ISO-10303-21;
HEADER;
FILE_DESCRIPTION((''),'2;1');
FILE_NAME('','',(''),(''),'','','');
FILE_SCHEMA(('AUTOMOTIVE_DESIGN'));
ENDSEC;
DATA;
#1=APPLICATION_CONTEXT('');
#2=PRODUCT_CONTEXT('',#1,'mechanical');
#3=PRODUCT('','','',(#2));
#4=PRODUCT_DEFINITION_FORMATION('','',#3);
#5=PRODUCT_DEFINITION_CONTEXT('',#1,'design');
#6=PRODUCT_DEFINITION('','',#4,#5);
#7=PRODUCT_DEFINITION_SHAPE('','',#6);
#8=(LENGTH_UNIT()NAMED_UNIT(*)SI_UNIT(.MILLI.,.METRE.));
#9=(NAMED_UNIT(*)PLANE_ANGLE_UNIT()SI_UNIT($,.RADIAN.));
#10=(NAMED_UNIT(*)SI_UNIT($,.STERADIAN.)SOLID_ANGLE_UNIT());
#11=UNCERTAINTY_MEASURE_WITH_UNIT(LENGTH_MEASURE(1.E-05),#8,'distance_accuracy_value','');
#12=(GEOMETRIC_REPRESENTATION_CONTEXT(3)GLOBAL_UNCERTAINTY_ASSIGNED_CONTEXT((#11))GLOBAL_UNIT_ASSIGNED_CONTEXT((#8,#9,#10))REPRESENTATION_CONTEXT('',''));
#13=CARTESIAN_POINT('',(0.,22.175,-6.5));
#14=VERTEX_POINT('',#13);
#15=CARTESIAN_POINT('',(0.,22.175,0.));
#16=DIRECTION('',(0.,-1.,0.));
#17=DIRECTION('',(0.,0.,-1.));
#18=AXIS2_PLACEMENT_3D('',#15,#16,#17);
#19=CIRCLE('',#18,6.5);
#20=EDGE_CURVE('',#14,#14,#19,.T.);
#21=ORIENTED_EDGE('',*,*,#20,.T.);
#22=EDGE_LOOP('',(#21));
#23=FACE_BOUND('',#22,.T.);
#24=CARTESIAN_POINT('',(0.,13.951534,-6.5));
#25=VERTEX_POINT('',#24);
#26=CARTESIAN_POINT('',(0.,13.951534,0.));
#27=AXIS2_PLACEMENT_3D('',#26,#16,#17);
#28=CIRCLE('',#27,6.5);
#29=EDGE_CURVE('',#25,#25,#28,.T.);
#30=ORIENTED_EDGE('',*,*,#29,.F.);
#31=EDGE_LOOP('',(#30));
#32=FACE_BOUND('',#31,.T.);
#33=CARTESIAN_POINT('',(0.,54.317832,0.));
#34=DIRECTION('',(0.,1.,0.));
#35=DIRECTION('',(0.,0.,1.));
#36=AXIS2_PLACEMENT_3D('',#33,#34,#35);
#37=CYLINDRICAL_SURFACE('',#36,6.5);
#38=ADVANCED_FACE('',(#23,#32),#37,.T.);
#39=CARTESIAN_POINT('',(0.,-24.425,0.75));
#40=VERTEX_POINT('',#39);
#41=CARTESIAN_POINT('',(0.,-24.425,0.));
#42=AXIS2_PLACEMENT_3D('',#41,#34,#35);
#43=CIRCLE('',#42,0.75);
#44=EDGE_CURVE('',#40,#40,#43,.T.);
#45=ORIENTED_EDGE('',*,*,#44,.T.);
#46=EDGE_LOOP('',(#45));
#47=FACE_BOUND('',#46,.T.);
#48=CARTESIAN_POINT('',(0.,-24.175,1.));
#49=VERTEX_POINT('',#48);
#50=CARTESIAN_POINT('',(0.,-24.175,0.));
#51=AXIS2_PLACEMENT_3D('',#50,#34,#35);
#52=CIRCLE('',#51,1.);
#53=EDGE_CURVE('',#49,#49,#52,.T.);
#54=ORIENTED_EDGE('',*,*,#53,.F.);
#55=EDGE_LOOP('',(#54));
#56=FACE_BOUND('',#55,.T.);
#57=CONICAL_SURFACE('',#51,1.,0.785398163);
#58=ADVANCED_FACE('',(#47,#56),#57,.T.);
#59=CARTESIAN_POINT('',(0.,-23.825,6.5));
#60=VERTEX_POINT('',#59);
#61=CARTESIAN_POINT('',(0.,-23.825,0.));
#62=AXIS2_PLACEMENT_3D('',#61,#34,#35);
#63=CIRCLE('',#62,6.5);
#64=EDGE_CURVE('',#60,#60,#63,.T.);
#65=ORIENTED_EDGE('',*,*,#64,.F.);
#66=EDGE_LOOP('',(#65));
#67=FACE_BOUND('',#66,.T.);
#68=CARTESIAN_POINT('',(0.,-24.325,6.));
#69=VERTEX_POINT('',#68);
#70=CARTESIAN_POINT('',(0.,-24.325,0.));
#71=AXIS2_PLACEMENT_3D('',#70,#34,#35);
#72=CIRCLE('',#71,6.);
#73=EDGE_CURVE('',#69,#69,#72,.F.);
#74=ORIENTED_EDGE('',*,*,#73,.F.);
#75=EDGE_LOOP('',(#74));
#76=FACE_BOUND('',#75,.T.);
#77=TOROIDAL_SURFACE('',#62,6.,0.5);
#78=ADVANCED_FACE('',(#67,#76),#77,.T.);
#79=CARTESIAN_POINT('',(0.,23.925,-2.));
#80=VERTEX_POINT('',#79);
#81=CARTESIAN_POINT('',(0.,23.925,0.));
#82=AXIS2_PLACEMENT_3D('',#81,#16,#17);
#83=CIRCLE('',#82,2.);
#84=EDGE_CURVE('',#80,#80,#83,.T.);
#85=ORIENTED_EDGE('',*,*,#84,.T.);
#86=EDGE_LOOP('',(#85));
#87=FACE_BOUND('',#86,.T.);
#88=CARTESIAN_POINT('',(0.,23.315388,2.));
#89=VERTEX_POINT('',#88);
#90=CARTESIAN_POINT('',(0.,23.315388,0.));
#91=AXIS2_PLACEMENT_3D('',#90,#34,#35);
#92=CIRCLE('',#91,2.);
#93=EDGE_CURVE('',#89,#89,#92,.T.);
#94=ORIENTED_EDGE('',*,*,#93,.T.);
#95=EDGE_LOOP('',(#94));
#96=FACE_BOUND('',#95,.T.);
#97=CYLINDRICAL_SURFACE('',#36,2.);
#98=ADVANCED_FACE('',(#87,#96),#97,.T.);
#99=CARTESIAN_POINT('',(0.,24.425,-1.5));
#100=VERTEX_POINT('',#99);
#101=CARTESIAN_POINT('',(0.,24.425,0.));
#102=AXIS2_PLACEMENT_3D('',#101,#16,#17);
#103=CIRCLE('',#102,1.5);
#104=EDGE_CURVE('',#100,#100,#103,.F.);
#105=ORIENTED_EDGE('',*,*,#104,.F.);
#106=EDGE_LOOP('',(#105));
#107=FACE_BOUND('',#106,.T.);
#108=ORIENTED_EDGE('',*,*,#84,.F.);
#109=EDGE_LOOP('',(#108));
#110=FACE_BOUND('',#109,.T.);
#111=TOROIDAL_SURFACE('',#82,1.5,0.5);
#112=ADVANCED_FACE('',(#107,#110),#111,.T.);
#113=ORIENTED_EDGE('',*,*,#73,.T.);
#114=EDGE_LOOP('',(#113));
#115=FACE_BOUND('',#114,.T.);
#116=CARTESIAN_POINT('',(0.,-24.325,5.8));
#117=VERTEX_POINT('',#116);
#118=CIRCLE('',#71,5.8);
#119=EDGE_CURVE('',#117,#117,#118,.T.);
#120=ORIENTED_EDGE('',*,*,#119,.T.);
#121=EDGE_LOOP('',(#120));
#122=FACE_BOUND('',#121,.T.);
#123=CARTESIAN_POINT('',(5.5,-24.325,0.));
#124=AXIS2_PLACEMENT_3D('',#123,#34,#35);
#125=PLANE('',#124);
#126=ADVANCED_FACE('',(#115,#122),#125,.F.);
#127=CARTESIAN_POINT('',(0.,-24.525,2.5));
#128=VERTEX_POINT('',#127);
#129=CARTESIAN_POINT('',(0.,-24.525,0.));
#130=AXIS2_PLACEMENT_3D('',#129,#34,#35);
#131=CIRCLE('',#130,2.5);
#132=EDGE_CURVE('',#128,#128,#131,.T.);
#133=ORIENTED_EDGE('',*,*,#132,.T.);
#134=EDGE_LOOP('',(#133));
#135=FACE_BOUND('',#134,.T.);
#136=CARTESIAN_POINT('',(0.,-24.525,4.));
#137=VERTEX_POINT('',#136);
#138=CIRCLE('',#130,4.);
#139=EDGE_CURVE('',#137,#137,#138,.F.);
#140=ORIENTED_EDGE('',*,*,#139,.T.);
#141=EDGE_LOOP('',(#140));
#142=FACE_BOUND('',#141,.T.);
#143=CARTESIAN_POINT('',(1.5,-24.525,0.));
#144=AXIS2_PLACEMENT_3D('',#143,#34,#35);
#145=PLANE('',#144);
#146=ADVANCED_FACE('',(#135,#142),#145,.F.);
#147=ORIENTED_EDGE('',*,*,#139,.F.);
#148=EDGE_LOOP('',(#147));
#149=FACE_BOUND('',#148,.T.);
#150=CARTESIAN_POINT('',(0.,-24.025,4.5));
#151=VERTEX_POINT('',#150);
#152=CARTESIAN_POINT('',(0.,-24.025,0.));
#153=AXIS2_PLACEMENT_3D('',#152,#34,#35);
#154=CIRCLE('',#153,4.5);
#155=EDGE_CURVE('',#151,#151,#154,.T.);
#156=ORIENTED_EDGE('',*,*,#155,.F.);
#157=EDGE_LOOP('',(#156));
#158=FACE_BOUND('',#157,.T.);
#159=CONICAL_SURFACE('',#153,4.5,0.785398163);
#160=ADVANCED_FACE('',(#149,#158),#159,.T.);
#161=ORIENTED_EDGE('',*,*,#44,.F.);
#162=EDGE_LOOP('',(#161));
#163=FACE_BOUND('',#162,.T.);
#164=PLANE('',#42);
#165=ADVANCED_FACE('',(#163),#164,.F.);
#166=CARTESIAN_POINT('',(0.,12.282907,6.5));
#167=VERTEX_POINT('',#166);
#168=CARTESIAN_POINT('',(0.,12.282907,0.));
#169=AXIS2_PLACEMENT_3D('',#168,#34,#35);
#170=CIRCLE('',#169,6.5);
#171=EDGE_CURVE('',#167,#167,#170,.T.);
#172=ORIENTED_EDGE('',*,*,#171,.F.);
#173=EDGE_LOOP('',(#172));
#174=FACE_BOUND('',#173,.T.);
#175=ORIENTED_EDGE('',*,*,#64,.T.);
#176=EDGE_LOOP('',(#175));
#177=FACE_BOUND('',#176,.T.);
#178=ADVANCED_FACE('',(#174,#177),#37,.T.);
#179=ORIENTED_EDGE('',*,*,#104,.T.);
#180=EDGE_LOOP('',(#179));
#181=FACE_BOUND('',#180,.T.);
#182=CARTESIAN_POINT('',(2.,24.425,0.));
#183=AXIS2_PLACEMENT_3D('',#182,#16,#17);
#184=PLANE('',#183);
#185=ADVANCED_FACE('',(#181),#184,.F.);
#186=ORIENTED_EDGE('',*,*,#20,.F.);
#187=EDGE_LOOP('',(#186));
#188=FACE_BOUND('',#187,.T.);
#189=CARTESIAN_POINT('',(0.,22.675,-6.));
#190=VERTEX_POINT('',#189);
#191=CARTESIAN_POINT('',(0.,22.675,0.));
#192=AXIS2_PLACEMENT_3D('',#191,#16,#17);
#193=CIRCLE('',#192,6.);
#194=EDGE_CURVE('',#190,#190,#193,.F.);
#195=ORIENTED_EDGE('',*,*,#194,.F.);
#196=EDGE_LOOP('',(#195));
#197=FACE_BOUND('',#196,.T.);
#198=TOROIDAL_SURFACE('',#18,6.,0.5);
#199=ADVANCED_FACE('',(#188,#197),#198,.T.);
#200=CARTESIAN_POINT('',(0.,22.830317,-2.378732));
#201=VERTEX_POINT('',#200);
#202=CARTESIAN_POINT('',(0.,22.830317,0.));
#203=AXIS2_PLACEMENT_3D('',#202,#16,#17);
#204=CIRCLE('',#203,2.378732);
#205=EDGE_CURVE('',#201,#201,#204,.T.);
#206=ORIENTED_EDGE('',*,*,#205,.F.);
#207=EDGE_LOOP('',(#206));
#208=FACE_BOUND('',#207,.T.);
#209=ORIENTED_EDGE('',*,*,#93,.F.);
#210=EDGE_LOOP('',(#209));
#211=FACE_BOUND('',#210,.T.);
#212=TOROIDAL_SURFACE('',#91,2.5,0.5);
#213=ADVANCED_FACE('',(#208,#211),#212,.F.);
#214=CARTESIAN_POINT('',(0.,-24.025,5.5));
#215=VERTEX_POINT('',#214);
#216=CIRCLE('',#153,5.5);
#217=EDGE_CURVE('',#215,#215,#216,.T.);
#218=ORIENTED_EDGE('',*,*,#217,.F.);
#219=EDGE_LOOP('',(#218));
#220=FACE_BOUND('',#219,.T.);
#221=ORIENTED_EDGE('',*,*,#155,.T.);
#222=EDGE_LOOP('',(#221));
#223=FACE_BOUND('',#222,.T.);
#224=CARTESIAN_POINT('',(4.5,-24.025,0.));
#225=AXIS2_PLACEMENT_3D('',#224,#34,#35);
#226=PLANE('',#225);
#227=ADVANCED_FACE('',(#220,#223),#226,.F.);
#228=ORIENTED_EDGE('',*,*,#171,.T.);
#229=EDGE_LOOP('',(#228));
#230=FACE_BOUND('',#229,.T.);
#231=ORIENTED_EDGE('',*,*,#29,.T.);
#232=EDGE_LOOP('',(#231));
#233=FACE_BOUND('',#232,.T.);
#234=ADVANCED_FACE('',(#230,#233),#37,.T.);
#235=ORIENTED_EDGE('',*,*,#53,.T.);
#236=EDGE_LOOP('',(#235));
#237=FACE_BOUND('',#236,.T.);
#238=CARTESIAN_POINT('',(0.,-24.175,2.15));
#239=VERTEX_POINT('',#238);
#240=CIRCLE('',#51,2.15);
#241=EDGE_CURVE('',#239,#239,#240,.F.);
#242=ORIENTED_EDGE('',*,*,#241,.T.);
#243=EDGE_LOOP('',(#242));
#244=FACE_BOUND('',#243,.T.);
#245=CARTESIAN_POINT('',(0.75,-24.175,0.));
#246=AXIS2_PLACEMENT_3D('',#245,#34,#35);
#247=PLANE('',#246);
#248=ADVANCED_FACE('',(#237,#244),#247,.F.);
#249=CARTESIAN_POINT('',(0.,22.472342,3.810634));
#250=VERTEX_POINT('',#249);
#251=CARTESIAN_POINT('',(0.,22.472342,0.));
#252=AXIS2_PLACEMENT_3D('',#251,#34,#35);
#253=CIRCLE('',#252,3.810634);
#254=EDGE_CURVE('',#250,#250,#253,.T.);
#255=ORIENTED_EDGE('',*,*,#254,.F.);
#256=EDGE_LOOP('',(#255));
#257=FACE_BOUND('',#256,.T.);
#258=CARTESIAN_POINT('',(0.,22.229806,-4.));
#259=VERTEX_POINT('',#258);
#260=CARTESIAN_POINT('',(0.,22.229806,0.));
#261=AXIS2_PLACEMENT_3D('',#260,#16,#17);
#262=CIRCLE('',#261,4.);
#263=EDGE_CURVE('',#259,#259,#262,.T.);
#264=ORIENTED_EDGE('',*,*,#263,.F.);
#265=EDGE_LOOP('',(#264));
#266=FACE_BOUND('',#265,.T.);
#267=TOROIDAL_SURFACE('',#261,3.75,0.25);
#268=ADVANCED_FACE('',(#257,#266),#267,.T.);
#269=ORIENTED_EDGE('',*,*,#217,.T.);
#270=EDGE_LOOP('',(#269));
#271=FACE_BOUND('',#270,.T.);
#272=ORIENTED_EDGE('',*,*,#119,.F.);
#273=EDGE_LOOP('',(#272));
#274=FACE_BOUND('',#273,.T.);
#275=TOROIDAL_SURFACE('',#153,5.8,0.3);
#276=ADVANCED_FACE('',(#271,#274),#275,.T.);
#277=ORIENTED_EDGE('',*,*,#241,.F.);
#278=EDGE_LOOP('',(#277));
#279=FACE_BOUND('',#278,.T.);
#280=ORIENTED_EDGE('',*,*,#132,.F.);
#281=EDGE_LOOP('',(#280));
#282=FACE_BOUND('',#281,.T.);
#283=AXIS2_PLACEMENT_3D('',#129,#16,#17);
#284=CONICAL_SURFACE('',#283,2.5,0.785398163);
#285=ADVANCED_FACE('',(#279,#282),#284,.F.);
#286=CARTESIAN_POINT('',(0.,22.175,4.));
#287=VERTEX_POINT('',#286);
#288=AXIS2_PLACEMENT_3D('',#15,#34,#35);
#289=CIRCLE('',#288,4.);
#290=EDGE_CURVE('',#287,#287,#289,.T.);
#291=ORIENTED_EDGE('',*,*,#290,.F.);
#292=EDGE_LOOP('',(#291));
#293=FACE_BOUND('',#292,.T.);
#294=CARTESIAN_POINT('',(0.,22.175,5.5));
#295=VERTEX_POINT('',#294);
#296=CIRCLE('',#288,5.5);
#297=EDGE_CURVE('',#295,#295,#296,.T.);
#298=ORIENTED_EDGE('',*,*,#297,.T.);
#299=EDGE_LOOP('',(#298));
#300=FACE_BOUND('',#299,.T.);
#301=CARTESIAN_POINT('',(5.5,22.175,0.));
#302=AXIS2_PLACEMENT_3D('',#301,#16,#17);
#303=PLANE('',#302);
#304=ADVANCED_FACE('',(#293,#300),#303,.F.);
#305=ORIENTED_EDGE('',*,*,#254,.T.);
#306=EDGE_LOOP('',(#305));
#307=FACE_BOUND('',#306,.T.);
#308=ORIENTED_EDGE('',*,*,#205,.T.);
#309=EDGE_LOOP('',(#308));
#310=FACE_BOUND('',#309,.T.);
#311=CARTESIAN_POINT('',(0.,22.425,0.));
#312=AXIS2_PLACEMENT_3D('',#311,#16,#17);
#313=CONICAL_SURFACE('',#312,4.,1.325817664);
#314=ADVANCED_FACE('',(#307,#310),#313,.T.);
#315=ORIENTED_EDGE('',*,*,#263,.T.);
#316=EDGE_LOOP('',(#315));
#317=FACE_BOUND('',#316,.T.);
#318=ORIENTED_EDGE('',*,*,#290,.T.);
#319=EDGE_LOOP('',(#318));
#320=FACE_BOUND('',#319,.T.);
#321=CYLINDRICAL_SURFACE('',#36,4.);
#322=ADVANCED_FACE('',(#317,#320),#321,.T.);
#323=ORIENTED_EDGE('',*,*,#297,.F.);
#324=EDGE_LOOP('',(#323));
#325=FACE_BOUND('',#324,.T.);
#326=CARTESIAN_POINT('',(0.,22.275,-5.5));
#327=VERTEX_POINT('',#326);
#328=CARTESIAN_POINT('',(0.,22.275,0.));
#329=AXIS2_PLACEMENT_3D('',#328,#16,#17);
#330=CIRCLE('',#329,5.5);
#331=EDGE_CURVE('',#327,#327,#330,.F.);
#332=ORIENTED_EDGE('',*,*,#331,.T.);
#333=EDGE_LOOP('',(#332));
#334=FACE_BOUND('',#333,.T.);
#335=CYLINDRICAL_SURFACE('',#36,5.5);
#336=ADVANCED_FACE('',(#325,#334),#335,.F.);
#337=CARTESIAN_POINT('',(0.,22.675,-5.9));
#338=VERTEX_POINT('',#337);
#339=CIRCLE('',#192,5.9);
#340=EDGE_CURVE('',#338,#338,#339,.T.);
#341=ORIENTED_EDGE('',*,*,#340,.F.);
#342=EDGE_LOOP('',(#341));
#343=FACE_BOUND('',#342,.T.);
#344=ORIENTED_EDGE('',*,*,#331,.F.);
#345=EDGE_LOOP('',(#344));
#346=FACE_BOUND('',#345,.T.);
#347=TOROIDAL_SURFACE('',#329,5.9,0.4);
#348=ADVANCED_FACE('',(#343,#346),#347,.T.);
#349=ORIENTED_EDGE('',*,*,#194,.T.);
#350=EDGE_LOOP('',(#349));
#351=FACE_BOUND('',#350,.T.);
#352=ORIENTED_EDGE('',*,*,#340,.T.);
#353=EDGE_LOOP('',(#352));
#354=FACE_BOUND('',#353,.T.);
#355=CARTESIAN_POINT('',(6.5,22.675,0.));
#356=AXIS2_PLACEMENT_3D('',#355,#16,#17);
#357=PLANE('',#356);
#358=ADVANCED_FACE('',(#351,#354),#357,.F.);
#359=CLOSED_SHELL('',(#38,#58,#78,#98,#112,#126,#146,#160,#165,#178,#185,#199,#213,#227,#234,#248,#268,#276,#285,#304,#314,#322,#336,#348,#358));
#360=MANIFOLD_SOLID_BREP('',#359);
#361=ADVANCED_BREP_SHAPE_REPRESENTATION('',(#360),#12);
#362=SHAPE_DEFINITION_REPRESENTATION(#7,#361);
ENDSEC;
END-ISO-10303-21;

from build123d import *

# Parameters (mm, degrees)
FILLET1_R     = 0.5
FILLET2_R     = 0.4
FILLET3_R     = 0.25
FILLET4_R     = 0.5
FILLET5_R     = 0.5
FILLET6_R     = 0.5
FILLET7_R     = 0.3
CHAMFER1_SIZE = 0.5
CHAMFER2_SIZE = 1
CHAMFER3_SIZE = 0.25


# Some blends are built 0.0001 mm under size
with BuildPart() as part:
    # Sketch1 → Revolve1 (revolve)
    with BuildSketch(Plane.XY, mode=Mode.PRIVATE) as revolve1_sk:
        Polygon((0, -24.425), (0.75, -24.425), (0.75, -24.175), (1.5, -24.175), (1.5, -24.525), (4.5, -24.525), (4.5, -24.025), (5.5, -24.025), (5.5, -24.325), (6.5, -24.325), (6.5, 22.675), (5.5, 22.675), (5.5, 22.175), (4, 22.175), (4, 22.425), (2, 22.925), (2, 24.425), (0, 24.425), align=None)
    revolve(revolve1_sk.sketch.rotate(Axis((0, 54.317832455, 0), (0, -1, 0)), 90), axis=Axis((0, 54.317832455, 0), (0, -1, 0)))

    # Fillet1
    fillet1_edges = [part.edges().sort_by_distance(p)[0] for p in [
        (0, 22.675, -6.5),
    ]]
    fillet(fillet1_edges, radius=FILLET1_R)

    # Fillet2
    fillet2_edges = [part.edges().sort_by_distance(p)[0] for p in [
        (0, 22.675, -5.5),
    ]]
    fillet(fillet2_edges, radius=FILLET2_R)

    # Fillet3
    fillet3_edges = [part.edges().sort_by_distance(p)[0] for p in [
        (0, 22.425, -4),
    ]]
    fillet(fillet3_edges, radius=FILLET3_R)

    # Fillet4
    fillet4_edges = [part.edges().sort_by_distance(p)[0] for p in [
        (0, 22.925, -2),
    ]]
    fillet(fillet4_edges, radius=FILLET4_R)

    # Fillet5
    fillet5_edges = [part.edges().sort_by_distance(p)[0] for p in [
        (0, 24.425, -2),
    ]]
    fillet(fillet5_edges, radius=FILLET5_R)

    # Fillet6
    fillet6_edges = [part.edges().sort_by_distance(p)[0] for p in [
        (0, -24.325, -6.5),
    ]]
    fillet(fillet6_edges, radius=FILLET6_R)

    # Fillet7
    fillet7_edges = [part.edges().sort_by_distance(p)[0] for p in [
        (0, -24.325, -5.5),
    ]]
    fillet(fillet7_edges, radius=FILLET7_R - 0.0001)  # a hair under: the kernel refuses the full size

    # Chamfer1
    chamfer1_edges = [part.edges().sort_by_distance(p)[0] for p in [
        (0, -24.525, -4.5),
    ]]
    chamfer(chamfer1_edges, length=CHAMFER1_SIZE - 0.0001)  # a hair under: the kernel refuses the full size

    # Chamfer2
    # the kernel refuses this chamfer: 1 mm, written as the material it takes off along each edge
    with BuildSketch(Plane(origin=(0, -24.525, 0), x_dir=(0, 0, 1), z_dir=(1, 0, 0))) as chamfer2_piece_1_section:
        Polygon((1.5 + CHAMFER2_SIZE, 0), (1.5, -CHAMFER2_SIZE), (1.5, 0), align=None)
    chamfer2_piece_1 = revolve(axis=Axis((0, -24.525, 0), (0, -1, 0)), mode=Mode.PRIVATE)
    chamfer2_piece_1 = split(chamfer2_piece_1, bisect_by=Plane(origin=(0, -24.175, -2.328039708), z_dir=(0, -1, 0)), keep=Keep.TOP, mode=Mode.PRIVATE)
    add(chamfer2_piece_1, mode=Mode.SUBTRACT)

    # Chamfer3
    chamfer3_edges = [part.edges().sort_by_distance(p)[0] for p in [
        (0, -24.175, -0.75),
    ]]
    chamfer(chamfer3_edges, length=CHAMFER3_SIZE - 0.0001)  # a hair under: the kernel refuses the full size


solid = part.part
